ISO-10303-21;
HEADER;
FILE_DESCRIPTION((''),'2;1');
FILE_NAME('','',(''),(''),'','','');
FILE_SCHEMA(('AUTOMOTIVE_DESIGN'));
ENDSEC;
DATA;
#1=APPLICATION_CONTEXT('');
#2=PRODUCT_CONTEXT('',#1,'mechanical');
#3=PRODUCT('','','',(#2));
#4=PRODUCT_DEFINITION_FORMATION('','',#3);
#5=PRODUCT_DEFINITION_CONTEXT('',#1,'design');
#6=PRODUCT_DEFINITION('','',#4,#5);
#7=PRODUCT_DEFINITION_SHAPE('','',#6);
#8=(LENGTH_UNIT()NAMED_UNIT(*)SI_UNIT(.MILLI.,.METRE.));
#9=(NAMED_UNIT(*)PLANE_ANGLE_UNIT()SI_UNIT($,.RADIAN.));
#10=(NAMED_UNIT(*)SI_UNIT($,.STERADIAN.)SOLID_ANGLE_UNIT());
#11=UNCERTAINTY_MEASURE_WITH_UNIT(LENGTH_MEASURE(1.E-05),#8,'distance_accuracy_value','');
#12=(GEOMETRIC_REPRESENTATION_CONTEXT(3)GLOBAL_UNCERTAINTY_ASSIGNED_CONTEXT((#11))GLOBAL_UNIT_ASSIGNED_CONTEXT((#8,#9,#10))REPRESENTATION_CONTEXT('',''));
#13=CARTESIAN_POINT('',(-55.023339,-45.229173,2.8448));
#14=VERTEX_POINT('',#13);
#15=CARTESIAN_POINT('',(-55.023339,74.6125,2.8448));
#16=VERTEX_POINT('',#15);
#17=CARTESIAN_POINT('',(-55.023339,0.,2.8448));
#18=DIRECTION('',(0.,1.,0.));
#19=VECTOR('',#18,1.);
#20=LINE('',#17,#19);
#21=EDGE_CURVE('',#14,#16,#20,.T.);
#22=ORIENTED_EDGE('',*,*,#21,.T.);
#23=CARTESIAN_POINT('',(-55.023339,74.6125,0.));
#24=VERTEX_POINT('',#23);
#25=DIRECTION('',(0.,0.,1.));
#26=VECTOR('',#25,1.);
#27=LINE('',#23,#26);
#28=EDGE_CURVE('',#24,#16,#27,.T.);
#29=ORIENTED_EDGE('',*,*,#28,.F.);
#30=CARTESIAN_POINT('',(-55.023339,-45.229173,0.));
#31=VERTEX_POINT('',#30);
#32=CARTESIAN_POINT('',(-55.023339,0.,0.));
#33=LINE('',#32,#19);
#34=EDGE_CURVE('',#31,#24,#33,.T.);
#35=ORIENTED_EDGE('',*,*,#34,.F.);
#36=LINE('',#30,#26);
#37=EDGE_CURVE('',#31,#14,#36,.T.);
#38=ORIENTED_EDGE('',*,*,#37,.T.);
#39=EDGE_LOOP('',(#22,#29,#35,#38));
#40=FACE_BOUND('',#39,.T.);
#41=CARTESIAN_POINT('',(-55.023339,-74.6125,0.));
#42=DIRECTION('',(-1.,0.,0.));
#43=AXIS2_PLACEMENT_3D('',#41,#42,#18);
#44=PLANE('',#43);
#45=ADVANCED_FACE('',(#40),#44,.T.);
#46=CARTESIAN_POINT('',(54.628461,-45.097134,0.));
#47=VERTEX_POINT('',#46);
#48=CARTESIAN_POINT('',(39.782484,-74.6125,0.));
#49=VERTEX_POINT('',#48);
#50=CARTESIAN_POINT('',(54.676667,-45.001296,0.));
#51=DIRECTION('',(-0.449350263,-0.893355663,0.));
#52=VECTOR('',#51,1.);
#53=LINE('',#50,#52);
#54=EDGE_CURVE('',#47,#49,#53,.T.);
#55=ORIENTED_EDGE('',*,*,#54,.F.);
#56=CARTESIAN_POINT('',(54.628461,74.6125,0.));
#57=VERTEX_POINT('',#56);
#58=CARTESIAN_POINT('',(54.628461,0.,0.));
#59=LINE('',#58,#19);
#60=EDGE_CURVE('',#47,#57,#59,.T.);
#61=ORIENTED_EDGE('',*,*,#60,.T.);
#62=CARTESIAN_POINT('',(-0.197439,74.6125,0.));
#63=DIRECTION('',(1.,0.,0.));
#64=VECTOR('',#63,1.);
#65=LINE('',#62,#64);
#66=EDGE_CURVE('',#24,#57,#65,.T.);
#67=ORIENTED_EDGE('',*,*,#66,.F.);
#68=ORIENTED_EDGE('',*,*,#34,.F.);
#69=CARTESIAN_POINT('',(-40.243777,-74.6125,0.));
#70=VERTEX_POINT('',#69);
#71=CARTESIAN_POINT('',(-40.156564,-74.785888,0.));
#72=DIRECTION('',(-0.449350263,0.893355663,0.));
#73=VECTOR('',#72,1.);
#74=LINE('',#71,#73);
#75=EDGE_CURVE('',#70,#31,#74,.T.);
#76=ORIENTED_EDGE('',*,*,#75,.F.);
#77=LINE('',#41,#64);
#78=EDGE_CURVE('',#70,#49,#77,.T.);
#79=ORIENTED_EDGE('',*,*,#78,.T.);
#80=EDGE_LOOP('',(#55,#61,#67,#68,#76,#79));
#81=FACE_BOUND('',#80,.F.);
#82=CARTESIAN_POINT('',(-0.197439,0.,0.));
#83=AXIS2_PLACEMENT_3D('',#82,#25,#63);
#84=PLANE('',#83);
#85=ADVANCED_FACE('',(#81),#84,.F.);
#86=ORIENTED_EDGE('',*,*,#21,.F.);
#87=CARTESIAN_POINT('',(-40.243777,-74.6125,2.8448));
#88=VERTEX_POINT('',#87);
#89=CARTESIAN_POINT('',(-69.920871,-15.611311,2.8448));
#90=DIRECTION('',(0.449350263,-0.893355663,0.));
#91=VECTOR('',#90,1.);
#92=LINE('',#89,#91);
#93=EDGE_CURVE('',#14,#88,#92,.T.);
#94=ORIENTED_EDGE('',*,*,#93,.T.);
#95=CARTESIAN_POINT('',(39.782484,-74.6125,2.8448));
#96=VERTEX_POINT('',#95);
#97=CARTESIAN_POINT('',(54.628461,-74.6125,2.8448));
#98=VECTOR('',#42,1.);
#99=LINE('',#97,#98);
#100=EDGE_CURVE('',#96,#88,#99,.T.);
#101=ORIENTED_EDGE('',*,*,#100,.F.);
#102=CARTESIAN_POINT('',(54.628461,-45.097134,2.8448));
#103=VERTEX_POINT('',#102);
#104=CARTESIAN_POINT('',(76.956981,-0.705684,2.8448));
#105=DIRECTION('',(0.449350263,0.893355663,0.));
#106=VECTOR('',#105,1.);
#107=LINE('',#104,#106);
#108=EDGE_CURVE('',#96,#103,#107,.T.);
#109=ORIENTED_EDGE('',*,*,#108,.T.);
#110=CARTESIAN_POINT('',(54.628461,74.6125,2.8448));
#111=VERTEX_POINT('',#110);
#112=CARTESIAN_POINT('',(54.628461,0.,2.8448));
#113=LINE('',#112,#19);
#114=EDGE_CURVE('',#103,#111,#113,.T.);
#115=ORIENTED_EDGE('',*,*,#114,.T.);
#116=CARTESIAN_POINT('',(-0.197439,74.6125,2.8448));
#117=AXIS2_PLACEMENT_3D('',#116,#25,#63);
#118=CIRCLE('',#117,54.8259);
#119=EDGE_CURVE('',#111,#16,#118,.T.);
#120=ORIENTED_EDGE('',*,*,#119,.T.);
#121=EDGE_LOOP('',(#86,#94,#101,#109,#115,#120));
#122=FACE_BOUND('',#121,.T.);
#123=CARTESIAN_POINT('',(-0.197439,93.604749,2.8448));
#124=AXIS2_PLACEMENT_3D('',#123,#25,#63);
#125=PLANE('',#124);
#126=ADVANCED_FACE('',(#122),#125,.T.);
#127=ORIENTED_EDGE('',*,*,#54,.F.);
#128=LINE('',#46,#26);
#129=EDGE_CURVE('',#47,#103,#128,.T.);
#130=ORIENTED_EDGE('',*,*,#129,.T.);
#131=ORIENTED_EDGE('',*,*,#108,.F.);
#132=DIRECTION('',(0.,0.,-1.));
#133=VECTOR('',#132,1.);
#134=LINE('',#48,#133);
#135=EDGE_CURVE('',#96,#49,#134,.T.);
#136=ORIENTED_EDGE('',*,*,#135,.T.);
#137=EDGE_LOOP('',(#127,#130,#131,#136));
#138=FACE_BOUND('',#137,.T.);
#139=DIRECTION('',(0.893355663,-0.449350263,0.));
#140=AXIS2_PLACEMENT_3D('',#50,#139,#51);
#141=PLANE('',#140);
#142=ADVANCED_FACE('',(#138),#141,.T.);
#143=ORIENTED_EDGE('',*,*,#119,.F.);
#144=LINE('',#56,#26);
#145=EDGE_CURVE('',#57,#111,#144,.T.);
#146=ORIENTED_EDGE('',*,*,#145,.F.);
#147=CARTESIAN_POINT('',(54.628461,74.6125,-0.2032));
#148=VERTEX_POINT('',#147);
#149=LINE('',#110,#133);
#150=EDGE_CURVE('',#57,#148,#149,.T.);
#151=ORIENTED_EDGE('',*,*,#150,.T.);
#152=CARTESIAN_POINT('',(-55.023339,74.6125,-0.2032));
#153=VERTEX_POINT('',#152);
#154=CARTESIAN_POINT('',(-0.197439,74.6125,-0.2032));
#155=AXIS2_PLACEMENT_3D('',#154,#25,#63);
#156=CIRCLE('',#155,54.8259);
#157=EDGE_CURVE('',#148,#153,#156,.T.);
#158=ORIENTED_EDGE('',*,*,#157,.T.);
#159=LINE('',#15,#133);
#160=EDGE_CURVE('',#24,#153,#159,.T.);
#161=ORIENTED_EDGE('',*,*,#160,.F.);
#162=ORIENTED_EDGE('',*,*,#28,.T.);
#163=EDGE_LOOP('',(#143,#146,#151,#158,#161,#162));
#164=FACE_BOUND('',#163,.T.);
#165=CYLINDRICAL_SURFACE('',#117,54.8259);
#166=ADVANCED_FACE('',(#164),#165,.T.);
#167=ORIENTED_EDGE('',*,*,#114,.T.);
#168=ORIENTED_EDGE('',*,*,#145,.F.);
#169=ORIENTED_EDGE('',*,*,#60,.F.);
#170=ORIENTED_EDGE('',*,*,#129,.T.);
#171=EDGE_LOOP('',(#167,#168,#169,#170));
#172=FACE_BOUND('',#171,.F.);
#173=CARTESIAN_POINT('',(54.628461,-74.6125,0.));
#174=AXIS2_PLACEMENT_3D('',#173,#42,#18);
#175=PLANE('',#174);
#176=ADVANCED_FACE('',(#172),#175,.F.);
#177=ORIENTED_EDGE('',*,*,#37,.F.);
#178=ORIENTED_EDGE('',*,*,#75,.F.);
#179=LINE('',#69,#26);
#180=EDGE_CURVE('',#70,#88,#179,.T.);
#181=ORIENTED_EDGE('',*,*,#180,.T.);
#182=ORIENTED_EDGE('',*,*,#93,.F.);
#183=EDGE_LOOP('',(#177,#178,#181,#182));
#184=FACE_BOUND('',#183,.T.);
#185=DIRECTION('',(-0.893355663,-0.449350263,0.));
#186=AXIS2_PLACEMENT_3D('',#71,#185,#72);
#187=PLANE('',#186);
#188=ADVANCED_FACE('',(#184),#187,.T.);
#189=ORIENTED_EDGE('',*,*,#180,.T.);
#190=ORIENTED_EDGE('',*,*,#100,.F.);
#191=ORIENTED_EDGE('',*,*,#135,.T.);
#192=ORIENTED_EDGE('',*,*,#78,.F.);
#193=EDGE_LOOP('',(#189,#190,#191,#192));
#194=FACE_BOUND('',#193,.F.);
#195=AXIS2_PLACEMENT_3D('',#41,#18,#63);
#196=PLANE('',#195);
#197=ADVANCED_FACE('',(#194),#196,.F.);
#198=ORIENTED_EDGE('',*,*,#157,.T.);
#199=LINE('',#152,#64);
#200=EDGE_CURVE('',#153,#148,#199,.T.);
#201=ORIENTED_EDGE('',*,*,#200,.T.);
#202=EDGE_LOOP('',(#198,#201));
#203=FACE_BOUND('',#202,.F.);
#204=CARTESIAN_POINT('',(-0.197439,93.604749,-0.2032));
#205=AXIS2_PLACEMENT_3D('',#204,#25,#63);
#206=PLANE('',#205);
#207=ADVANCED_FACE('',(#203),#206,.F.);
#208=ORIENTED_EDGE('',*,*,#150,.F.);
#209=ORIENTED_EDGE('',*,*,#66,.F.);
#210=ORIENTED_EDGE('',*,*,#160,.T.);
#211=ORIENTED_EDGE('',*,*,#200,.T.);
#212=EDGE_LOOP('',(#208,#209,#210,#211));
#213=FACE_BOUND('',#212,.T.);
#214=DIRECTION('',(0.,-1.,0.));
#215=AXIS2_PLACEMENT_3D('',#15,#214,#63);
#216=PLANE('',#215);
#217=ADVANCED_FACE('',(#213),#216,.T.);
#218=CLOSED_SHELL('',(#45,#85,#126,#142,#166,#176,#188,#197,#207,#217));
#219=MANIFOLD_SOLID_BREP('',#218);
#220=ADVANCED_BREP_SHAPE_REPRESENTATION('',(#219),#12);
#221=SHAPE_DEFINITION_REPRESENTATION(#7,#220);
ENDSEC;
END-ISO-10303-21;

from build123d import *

# Parameters (mm, degrees)
F0_W     = 109.6518
F0_H     = 149.225
F1_DEPTH = 2.8448
F3_DEPTH = 25.4
F5_DEPTH = 3.048
F9_DEPTH = 107.442


# Not quite as in the source:
# - a feature names something its author has since deleted; it is built from what else it names


with BuildPart() as f1:
    # F0 (on Top) → F1 (new body)
    with BuildSketch(Plane.XY):
        with Locations((13.2645608256, 0)):
            Rectangle(F0_W, F0_H)
    extrude(amount=F1_DEPTH)

    # F2 (on face) → F3 (cut)
    with BuildSketch(Plane.XY.offset(2.8448)):
        Polygon((68.0904608256, -74.6125), (27.7860667557, -74.6125), (68.0904608256, -75.2405971289), align=None)
        Polygon((-41.5613391744, -75.712069869), (-25.0190570951, -74.6125), (-41.5613391744, -74.6125), align=None)
    extrude(amount=-F3_DEPTH, mode=Mode.SUBTRACT)

    # F4 (on face) → F5 (join)
    with BuildSketch(Plane.XY.offset(2.8448)):
        with BuildLine():
            Line((-41.5613391744, 74.6125), (68.0904608256, 74.6125))
            ThreePointArc((68.0904608256, 74.6125), (13.2645608256, 129.4384), (-41.5613391744, 74.6125))
        make_face()
    extrude(amount=-F5_DEPTH)


with BuildPart() as f1_1:
    # F6: moved
    add(f1.part.moved(Location((-10.668, 0, 0))))


with BuildPart() as f1_2:
    # F7: moved
    add(f1_1.part.moved(Location((-2.794, 0, 0))))

    # F8 (on Top) → F9 (cut)
    with BuildSketch(Plane.XY):
        Polygon((-55.1044642925, -45.067888195), (-55.1044642925, -74.785888195), (-40.1565642925, -74.785888195), align=None)
        Polygon((54.6766667015, -45.0012958965), (39.7287667015, -74.7192958965), (54.6766667015, -74.7192958965), align=None)
    extrude(amount=F9_DEPTH, mode=Mode.SUBTRACT)


solid = f1_2.part
